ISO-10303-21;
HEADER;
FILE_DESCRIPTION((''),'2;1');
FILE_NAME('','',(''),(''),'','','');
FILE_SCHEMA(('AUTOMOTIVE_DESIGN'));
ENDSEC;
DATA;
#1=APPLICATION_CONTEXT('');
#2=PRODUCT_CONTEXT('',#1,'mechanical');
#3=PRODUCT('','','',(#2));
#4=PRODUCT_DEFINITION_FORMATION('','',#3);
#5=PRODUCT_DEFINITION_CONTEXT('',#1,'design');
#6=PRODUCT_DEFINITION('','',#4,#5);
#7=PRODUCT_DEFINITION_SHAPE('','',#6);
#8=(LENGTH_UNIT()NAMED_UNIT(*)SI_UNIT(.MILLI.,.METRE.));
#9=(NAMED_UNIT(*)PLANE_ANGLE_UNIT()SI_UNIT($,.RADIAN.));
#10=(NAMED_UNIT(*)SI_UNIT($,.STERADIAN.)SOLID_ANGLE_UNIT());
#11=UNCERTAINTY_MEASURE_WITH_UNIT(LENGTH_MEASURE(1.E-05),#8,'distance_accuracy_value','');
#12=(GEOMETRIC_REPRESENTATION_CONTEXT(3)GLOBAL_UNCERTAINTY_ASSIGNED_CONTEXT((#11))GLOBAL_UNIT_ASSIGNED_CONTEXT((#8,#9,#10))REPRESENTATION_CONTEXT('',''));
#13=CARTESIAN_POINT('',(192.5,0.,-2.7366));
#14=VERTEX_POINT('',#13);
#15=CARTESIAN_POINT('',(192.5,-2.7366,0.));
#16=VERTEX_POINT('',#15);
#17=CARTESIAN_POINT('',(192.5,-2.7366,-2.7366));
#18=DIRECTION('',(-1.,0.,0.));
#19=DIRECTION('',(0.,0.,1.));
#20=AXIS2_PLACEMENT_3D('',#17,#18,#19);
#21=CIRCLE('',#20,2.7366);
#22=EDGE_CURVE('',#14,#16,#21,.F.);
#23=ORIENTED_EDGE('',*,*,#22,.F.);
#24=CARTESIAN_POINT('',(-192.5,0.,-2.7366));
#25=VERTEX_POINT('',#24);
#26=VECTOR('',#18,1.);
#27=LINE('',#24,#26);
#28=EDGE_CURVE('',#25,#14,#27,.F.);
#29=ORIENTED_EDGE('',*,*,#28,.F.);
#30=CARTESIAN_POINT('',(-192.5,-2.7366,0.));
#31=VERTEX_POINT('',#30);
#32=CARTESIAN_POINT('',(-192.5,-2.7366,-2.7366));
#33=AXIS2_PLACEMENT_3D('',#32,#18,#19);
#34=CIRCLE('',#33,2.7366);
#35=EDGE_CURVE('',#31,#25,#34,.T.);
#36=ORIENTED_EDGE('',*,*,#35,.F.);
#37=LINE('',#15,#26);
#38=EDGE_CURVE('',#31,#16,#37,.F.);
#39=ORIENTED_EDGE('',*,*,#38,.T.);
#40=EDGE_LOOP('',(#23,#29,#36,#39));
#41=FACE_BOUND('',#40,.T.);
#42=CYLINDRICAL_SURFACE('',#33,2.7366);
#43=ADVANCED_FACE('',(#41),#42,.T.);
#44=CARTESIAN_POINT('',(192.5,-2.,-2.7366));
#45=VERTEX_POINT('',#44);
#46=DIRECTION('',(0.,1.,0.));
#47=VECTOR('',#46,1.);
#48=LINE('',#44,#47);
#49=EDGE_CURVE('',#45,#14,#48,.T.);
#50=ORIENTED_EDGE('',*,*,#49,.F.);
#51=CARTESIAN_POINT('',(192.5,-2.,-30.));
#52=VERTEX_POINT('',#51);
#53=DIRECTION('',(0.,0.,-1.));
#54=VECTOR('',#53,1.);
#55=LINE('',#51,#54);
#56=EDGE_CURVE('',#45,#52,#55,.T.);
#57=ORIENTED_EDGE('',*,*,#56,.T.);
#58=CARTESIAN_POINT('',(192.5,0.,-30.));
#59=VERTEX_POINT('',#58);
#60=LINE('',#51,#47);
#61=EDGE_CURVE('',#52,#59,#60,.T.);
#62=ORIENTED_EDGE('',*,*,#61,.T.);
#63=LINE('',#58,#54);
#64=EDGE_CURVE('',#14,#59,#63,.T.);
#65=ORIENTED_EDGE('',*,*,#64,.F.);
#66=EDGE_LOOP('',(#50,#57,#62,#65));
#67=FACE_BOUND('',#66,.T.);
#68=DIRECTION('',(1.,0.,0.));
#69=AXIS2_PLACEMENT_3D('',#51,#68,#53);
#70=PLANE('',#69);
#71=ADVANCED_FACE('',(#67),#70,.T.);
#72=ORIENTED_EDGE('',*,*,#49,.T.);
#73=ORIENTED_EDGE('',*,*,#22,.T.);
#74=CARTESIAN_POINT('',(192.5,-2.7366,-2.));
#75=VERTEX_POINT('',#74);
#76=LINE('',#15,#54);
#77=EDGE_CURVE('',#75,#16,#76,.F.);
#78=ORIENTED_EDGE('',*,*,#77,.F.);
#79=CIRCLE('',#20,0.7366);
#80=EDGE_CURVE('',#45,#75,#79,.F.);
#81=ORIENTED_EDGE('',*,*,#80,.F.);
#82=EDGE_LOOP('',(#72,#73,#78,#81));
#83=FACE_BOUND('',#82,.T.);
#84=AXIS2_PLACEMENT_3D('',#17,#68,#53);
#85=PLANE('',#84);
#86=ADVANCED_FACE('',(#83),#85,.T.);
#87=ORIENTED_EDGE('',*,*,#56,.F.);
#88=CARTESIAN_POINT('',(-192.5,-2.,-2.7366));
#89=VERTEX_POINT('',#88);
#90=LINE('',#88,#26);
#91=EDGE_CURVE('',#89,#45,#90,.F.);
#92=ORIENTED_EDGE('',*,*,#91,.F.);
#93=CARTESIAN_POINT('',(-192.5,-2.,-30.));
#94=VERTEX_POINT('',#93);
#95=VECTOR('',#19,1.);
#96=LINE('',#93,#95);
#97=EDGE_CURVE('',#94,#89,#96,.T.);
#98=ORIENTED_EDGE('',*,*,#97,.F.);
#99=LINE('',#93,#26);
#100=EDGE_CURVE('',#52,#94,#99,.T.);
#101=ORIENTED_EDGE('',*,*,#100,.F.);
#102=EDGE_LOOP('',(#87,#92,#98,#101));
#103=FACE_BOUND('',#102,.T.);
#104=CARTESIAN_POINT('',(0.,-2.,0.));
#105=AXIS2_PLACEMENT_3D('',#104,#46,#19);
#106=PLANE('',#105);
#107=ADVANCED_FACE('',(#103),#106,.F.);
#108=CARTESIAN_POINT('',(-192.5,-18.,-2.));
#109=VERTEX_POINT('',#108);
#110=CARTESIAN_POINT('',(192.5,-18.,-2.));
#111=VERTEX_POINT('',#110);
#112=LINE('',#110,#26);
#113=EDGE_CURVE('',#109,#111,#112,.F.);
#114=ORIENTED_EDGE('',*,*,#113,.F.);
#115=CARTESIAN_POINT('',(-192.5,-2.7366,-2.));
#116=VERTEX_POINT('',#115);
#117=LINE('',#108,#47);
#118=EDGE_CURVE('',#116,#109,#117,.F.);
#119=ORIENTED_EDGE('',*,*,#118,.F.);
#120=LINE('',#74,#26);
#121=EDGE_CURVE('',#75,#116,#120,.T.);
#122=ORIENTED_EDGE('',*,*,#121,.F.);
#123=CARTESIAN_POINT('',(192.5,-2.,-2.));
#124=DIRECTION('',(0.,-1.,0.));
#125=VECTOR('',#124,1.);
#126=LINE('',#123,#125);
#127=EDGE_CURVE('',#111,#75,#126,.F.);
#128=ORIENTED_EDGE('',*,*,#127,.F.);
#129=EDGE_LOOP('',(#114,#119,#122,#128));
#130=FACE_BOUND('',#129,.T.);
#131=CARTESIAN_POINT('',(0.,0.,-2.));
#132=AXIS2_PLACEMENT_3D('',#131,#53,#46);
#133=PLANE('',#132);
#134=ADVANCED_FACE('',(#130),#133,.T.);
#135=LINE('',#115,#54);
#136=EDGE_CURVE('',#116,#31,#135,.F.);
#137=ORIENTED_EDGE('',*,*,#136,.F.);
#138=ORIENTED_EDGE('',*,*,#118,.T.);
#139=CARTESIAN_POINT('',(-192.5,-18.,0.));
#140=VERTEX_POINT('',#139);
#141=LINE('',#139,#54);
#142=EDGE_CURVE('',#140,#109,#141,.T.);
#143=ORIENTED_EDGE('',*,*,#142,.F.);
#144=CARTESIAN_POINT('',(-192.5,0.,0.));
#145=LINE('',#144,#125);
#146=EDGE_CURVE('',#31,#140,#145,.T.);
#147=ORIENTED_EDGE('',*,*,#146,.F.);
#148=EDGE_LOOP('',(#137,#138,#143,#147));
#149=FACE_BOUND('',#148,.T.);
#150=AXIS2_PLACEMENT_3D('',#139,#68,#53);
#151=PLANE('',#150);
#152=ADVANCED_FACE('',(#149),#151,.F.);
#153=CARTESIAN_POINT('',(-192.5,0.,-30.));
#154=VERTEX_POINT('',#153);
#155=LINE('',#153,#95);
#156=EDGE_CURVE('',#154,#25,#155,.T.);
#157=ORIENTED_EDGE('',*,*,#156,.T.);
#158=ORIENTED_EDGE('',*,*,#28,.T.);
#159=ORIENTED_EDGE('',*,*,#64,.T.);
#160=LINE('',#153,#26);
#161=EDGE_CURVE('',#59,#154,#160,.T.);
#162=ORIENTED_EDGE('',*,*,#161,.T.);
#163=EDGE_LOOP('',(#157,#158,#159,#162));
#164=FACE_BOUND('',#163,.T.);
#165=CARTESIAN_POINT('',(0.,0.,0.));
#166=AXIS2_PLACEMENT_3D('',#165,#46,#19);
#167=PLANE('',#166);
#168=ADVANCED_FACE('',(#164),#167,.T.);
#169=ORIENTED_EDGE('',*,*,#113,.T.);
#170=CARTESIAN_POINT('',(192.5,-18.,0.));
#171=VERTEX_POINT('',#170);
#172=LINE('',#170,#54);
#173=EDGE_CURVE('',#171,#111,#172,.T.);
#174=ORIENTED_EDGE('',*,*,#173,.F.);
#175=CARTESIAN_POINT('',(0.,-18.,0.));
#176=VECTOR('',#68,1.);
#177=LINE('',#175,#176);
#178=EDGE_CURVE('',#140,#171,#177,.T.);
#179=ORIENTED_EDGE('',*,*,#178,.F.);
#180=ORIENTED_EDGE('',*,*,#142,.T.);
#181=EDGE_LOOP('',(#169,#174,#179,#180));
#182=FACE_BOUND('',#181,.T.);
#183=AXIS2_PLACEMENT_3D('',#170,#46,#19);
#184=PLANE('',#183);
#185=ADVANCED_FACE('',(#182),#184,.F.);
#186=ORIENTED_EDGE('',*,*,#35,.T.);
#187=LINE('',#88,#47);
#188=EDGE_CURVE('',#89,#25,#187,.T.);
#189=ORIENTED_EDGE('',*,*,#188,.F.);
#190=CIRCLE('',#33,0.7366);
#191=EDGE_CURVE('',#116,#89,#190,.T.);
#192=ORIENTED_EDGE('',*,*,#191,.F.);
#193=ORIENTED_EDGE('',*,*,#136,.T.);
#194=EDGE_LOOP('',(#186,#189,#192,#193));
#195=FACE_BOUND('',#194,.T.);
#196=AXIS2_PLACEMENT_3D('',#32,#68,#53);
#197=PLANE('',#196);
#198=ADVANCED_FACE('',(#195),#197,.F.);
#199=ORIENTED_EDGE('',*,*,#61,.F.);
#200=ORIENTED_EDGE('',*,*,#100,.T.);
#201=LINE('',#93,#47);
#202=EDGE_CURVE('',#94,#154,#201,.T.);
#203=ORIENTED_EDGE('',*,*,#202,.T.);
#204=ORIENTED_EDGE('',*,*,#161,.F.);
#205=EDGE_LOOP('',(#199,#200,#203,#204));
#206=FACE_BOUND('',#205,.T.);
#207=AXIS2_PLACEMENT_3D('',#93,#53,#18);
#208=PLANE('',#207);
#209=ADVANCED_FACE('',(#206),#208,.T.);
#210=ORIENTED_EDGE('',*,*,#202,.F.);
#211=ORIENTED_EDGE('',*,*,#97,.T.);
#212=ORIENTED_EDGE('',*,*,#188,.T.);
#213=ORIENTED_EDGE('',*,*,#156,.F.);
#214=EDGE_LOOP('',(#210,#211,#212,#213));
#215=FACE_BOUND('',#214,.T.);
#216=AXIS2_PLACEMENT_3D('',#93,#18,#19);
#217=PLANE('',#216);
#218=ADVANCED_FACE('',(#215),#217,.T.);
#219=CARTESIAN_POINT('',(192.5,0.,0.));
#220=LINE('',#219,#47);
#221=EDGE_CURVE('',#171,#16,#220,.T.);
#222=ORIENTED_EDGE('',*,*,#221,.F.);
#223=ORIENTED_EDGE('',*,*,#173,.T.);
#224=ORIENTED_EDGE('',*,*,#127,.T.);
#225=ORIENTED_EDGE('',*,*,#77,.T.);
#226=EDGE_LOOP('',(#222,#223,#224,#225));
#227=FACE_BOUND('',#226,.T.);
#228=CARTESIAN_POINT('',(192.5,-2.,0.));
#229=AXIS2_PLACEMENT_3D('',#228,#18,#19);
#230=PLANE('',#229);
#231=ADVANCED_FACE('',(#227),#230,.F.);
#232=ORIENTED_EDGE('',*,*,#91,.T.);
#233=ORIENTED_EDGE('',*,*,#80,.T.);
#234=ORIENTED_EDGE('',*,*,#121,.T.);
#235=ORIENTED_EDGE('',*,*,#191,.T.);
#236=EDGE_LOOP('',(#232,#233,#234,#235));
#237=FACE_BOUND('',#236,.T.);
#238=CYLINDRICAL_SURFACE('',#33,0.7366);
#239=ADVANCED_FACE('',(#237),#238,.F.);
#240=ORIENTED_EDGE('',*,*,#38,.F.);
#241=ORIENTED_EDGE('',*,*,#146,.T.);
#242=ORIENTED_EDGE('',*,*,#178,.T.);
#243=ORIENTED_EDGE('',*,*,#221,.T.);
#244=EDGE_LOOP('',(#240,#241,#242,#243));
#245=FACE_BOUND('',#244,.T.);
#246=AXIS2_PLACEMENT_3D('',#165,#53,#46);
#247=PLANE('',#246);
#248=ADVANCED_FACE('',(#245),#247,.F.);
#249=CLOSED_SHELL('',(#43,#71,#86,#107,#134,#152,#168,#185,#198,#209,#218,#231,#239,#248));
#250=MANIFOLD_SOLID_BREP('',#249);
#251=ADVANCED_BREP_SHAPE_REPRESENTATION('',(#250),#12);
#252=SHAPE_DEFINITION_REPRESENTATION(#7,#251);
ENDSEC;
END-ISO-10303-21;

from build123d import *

# Parameters (mm, degrees)
SKETCH1_W                    = 385
SKETCH1_H                    = 30
BASE_FLANGE1_DEPTH           = 2
EDGE_FLANGE2_STRIP_W         = 9.4732
EDGE_FLANGE2_STRIP_H         = 2
EDGE_FLANGE2_STRIP_CUT_DEPTH = 385
EDGE_FLANGE2_DEPTH           = 385


# Sheet-metal steps are written as plain solids
with BuildPart() as part:
    # Sketch1 → Base-Flange1 (new body)
    with BuildSketch(Plane(origin=(0, 0, 0), x_dir=(1, 0, 0), z_dir=(0, 1, 0))):
        with Locations((0, 15)):
            Rectangle(SKETCH1_W, SKETCH1_H)
    extrude(amount=-BASE_FLANGE1_DEPTH)

    # Edge-Flange2 strip (across the edge) → Edge-Flange2 strip cut (cut)
    with BuildSketch(Plane(origin=(192.5, -2, 0), x_dir=(0, 0, -1), z_dir=(-1, 0, 0))):
        with Locations((-2, -1)):
            Rectangle(EDGE_FLANGE2_STRIP_W, EDGE_FLANGE2_STRIP_H)
    extrude(amount=EDGE_FLANGE2_STRIP_CUT_DEPTH, mode=Mode.SUBTRACT)

    # Edge-Flange2 section (across the edge) → Edge-Flange2 (add)
    with BuildSketch(Plane(origin=(192.5, -2, 0), x_dir=(0, 0, -1), z_dir=(-1, 0, 0))):
        with BuildLine():
            Line((0, 0.7366), (0, 16))
            Line((0, 16), (2, 16))
            Line((2, 16), (2, 0.7366))
            ThreePointArc((2, 0.7366), (2.215745145, 0.215745145), (2.7366, 0))
            Line((2.7366, 0), (2.7366, -2))
            ThreePointArc((2.7366, -2), (0.801531583, -1.198468417), (0, 0.7366))
        make_face()
    extrude(amount=EDGE_FLANGE2_DEPTH)


solid = part.part
